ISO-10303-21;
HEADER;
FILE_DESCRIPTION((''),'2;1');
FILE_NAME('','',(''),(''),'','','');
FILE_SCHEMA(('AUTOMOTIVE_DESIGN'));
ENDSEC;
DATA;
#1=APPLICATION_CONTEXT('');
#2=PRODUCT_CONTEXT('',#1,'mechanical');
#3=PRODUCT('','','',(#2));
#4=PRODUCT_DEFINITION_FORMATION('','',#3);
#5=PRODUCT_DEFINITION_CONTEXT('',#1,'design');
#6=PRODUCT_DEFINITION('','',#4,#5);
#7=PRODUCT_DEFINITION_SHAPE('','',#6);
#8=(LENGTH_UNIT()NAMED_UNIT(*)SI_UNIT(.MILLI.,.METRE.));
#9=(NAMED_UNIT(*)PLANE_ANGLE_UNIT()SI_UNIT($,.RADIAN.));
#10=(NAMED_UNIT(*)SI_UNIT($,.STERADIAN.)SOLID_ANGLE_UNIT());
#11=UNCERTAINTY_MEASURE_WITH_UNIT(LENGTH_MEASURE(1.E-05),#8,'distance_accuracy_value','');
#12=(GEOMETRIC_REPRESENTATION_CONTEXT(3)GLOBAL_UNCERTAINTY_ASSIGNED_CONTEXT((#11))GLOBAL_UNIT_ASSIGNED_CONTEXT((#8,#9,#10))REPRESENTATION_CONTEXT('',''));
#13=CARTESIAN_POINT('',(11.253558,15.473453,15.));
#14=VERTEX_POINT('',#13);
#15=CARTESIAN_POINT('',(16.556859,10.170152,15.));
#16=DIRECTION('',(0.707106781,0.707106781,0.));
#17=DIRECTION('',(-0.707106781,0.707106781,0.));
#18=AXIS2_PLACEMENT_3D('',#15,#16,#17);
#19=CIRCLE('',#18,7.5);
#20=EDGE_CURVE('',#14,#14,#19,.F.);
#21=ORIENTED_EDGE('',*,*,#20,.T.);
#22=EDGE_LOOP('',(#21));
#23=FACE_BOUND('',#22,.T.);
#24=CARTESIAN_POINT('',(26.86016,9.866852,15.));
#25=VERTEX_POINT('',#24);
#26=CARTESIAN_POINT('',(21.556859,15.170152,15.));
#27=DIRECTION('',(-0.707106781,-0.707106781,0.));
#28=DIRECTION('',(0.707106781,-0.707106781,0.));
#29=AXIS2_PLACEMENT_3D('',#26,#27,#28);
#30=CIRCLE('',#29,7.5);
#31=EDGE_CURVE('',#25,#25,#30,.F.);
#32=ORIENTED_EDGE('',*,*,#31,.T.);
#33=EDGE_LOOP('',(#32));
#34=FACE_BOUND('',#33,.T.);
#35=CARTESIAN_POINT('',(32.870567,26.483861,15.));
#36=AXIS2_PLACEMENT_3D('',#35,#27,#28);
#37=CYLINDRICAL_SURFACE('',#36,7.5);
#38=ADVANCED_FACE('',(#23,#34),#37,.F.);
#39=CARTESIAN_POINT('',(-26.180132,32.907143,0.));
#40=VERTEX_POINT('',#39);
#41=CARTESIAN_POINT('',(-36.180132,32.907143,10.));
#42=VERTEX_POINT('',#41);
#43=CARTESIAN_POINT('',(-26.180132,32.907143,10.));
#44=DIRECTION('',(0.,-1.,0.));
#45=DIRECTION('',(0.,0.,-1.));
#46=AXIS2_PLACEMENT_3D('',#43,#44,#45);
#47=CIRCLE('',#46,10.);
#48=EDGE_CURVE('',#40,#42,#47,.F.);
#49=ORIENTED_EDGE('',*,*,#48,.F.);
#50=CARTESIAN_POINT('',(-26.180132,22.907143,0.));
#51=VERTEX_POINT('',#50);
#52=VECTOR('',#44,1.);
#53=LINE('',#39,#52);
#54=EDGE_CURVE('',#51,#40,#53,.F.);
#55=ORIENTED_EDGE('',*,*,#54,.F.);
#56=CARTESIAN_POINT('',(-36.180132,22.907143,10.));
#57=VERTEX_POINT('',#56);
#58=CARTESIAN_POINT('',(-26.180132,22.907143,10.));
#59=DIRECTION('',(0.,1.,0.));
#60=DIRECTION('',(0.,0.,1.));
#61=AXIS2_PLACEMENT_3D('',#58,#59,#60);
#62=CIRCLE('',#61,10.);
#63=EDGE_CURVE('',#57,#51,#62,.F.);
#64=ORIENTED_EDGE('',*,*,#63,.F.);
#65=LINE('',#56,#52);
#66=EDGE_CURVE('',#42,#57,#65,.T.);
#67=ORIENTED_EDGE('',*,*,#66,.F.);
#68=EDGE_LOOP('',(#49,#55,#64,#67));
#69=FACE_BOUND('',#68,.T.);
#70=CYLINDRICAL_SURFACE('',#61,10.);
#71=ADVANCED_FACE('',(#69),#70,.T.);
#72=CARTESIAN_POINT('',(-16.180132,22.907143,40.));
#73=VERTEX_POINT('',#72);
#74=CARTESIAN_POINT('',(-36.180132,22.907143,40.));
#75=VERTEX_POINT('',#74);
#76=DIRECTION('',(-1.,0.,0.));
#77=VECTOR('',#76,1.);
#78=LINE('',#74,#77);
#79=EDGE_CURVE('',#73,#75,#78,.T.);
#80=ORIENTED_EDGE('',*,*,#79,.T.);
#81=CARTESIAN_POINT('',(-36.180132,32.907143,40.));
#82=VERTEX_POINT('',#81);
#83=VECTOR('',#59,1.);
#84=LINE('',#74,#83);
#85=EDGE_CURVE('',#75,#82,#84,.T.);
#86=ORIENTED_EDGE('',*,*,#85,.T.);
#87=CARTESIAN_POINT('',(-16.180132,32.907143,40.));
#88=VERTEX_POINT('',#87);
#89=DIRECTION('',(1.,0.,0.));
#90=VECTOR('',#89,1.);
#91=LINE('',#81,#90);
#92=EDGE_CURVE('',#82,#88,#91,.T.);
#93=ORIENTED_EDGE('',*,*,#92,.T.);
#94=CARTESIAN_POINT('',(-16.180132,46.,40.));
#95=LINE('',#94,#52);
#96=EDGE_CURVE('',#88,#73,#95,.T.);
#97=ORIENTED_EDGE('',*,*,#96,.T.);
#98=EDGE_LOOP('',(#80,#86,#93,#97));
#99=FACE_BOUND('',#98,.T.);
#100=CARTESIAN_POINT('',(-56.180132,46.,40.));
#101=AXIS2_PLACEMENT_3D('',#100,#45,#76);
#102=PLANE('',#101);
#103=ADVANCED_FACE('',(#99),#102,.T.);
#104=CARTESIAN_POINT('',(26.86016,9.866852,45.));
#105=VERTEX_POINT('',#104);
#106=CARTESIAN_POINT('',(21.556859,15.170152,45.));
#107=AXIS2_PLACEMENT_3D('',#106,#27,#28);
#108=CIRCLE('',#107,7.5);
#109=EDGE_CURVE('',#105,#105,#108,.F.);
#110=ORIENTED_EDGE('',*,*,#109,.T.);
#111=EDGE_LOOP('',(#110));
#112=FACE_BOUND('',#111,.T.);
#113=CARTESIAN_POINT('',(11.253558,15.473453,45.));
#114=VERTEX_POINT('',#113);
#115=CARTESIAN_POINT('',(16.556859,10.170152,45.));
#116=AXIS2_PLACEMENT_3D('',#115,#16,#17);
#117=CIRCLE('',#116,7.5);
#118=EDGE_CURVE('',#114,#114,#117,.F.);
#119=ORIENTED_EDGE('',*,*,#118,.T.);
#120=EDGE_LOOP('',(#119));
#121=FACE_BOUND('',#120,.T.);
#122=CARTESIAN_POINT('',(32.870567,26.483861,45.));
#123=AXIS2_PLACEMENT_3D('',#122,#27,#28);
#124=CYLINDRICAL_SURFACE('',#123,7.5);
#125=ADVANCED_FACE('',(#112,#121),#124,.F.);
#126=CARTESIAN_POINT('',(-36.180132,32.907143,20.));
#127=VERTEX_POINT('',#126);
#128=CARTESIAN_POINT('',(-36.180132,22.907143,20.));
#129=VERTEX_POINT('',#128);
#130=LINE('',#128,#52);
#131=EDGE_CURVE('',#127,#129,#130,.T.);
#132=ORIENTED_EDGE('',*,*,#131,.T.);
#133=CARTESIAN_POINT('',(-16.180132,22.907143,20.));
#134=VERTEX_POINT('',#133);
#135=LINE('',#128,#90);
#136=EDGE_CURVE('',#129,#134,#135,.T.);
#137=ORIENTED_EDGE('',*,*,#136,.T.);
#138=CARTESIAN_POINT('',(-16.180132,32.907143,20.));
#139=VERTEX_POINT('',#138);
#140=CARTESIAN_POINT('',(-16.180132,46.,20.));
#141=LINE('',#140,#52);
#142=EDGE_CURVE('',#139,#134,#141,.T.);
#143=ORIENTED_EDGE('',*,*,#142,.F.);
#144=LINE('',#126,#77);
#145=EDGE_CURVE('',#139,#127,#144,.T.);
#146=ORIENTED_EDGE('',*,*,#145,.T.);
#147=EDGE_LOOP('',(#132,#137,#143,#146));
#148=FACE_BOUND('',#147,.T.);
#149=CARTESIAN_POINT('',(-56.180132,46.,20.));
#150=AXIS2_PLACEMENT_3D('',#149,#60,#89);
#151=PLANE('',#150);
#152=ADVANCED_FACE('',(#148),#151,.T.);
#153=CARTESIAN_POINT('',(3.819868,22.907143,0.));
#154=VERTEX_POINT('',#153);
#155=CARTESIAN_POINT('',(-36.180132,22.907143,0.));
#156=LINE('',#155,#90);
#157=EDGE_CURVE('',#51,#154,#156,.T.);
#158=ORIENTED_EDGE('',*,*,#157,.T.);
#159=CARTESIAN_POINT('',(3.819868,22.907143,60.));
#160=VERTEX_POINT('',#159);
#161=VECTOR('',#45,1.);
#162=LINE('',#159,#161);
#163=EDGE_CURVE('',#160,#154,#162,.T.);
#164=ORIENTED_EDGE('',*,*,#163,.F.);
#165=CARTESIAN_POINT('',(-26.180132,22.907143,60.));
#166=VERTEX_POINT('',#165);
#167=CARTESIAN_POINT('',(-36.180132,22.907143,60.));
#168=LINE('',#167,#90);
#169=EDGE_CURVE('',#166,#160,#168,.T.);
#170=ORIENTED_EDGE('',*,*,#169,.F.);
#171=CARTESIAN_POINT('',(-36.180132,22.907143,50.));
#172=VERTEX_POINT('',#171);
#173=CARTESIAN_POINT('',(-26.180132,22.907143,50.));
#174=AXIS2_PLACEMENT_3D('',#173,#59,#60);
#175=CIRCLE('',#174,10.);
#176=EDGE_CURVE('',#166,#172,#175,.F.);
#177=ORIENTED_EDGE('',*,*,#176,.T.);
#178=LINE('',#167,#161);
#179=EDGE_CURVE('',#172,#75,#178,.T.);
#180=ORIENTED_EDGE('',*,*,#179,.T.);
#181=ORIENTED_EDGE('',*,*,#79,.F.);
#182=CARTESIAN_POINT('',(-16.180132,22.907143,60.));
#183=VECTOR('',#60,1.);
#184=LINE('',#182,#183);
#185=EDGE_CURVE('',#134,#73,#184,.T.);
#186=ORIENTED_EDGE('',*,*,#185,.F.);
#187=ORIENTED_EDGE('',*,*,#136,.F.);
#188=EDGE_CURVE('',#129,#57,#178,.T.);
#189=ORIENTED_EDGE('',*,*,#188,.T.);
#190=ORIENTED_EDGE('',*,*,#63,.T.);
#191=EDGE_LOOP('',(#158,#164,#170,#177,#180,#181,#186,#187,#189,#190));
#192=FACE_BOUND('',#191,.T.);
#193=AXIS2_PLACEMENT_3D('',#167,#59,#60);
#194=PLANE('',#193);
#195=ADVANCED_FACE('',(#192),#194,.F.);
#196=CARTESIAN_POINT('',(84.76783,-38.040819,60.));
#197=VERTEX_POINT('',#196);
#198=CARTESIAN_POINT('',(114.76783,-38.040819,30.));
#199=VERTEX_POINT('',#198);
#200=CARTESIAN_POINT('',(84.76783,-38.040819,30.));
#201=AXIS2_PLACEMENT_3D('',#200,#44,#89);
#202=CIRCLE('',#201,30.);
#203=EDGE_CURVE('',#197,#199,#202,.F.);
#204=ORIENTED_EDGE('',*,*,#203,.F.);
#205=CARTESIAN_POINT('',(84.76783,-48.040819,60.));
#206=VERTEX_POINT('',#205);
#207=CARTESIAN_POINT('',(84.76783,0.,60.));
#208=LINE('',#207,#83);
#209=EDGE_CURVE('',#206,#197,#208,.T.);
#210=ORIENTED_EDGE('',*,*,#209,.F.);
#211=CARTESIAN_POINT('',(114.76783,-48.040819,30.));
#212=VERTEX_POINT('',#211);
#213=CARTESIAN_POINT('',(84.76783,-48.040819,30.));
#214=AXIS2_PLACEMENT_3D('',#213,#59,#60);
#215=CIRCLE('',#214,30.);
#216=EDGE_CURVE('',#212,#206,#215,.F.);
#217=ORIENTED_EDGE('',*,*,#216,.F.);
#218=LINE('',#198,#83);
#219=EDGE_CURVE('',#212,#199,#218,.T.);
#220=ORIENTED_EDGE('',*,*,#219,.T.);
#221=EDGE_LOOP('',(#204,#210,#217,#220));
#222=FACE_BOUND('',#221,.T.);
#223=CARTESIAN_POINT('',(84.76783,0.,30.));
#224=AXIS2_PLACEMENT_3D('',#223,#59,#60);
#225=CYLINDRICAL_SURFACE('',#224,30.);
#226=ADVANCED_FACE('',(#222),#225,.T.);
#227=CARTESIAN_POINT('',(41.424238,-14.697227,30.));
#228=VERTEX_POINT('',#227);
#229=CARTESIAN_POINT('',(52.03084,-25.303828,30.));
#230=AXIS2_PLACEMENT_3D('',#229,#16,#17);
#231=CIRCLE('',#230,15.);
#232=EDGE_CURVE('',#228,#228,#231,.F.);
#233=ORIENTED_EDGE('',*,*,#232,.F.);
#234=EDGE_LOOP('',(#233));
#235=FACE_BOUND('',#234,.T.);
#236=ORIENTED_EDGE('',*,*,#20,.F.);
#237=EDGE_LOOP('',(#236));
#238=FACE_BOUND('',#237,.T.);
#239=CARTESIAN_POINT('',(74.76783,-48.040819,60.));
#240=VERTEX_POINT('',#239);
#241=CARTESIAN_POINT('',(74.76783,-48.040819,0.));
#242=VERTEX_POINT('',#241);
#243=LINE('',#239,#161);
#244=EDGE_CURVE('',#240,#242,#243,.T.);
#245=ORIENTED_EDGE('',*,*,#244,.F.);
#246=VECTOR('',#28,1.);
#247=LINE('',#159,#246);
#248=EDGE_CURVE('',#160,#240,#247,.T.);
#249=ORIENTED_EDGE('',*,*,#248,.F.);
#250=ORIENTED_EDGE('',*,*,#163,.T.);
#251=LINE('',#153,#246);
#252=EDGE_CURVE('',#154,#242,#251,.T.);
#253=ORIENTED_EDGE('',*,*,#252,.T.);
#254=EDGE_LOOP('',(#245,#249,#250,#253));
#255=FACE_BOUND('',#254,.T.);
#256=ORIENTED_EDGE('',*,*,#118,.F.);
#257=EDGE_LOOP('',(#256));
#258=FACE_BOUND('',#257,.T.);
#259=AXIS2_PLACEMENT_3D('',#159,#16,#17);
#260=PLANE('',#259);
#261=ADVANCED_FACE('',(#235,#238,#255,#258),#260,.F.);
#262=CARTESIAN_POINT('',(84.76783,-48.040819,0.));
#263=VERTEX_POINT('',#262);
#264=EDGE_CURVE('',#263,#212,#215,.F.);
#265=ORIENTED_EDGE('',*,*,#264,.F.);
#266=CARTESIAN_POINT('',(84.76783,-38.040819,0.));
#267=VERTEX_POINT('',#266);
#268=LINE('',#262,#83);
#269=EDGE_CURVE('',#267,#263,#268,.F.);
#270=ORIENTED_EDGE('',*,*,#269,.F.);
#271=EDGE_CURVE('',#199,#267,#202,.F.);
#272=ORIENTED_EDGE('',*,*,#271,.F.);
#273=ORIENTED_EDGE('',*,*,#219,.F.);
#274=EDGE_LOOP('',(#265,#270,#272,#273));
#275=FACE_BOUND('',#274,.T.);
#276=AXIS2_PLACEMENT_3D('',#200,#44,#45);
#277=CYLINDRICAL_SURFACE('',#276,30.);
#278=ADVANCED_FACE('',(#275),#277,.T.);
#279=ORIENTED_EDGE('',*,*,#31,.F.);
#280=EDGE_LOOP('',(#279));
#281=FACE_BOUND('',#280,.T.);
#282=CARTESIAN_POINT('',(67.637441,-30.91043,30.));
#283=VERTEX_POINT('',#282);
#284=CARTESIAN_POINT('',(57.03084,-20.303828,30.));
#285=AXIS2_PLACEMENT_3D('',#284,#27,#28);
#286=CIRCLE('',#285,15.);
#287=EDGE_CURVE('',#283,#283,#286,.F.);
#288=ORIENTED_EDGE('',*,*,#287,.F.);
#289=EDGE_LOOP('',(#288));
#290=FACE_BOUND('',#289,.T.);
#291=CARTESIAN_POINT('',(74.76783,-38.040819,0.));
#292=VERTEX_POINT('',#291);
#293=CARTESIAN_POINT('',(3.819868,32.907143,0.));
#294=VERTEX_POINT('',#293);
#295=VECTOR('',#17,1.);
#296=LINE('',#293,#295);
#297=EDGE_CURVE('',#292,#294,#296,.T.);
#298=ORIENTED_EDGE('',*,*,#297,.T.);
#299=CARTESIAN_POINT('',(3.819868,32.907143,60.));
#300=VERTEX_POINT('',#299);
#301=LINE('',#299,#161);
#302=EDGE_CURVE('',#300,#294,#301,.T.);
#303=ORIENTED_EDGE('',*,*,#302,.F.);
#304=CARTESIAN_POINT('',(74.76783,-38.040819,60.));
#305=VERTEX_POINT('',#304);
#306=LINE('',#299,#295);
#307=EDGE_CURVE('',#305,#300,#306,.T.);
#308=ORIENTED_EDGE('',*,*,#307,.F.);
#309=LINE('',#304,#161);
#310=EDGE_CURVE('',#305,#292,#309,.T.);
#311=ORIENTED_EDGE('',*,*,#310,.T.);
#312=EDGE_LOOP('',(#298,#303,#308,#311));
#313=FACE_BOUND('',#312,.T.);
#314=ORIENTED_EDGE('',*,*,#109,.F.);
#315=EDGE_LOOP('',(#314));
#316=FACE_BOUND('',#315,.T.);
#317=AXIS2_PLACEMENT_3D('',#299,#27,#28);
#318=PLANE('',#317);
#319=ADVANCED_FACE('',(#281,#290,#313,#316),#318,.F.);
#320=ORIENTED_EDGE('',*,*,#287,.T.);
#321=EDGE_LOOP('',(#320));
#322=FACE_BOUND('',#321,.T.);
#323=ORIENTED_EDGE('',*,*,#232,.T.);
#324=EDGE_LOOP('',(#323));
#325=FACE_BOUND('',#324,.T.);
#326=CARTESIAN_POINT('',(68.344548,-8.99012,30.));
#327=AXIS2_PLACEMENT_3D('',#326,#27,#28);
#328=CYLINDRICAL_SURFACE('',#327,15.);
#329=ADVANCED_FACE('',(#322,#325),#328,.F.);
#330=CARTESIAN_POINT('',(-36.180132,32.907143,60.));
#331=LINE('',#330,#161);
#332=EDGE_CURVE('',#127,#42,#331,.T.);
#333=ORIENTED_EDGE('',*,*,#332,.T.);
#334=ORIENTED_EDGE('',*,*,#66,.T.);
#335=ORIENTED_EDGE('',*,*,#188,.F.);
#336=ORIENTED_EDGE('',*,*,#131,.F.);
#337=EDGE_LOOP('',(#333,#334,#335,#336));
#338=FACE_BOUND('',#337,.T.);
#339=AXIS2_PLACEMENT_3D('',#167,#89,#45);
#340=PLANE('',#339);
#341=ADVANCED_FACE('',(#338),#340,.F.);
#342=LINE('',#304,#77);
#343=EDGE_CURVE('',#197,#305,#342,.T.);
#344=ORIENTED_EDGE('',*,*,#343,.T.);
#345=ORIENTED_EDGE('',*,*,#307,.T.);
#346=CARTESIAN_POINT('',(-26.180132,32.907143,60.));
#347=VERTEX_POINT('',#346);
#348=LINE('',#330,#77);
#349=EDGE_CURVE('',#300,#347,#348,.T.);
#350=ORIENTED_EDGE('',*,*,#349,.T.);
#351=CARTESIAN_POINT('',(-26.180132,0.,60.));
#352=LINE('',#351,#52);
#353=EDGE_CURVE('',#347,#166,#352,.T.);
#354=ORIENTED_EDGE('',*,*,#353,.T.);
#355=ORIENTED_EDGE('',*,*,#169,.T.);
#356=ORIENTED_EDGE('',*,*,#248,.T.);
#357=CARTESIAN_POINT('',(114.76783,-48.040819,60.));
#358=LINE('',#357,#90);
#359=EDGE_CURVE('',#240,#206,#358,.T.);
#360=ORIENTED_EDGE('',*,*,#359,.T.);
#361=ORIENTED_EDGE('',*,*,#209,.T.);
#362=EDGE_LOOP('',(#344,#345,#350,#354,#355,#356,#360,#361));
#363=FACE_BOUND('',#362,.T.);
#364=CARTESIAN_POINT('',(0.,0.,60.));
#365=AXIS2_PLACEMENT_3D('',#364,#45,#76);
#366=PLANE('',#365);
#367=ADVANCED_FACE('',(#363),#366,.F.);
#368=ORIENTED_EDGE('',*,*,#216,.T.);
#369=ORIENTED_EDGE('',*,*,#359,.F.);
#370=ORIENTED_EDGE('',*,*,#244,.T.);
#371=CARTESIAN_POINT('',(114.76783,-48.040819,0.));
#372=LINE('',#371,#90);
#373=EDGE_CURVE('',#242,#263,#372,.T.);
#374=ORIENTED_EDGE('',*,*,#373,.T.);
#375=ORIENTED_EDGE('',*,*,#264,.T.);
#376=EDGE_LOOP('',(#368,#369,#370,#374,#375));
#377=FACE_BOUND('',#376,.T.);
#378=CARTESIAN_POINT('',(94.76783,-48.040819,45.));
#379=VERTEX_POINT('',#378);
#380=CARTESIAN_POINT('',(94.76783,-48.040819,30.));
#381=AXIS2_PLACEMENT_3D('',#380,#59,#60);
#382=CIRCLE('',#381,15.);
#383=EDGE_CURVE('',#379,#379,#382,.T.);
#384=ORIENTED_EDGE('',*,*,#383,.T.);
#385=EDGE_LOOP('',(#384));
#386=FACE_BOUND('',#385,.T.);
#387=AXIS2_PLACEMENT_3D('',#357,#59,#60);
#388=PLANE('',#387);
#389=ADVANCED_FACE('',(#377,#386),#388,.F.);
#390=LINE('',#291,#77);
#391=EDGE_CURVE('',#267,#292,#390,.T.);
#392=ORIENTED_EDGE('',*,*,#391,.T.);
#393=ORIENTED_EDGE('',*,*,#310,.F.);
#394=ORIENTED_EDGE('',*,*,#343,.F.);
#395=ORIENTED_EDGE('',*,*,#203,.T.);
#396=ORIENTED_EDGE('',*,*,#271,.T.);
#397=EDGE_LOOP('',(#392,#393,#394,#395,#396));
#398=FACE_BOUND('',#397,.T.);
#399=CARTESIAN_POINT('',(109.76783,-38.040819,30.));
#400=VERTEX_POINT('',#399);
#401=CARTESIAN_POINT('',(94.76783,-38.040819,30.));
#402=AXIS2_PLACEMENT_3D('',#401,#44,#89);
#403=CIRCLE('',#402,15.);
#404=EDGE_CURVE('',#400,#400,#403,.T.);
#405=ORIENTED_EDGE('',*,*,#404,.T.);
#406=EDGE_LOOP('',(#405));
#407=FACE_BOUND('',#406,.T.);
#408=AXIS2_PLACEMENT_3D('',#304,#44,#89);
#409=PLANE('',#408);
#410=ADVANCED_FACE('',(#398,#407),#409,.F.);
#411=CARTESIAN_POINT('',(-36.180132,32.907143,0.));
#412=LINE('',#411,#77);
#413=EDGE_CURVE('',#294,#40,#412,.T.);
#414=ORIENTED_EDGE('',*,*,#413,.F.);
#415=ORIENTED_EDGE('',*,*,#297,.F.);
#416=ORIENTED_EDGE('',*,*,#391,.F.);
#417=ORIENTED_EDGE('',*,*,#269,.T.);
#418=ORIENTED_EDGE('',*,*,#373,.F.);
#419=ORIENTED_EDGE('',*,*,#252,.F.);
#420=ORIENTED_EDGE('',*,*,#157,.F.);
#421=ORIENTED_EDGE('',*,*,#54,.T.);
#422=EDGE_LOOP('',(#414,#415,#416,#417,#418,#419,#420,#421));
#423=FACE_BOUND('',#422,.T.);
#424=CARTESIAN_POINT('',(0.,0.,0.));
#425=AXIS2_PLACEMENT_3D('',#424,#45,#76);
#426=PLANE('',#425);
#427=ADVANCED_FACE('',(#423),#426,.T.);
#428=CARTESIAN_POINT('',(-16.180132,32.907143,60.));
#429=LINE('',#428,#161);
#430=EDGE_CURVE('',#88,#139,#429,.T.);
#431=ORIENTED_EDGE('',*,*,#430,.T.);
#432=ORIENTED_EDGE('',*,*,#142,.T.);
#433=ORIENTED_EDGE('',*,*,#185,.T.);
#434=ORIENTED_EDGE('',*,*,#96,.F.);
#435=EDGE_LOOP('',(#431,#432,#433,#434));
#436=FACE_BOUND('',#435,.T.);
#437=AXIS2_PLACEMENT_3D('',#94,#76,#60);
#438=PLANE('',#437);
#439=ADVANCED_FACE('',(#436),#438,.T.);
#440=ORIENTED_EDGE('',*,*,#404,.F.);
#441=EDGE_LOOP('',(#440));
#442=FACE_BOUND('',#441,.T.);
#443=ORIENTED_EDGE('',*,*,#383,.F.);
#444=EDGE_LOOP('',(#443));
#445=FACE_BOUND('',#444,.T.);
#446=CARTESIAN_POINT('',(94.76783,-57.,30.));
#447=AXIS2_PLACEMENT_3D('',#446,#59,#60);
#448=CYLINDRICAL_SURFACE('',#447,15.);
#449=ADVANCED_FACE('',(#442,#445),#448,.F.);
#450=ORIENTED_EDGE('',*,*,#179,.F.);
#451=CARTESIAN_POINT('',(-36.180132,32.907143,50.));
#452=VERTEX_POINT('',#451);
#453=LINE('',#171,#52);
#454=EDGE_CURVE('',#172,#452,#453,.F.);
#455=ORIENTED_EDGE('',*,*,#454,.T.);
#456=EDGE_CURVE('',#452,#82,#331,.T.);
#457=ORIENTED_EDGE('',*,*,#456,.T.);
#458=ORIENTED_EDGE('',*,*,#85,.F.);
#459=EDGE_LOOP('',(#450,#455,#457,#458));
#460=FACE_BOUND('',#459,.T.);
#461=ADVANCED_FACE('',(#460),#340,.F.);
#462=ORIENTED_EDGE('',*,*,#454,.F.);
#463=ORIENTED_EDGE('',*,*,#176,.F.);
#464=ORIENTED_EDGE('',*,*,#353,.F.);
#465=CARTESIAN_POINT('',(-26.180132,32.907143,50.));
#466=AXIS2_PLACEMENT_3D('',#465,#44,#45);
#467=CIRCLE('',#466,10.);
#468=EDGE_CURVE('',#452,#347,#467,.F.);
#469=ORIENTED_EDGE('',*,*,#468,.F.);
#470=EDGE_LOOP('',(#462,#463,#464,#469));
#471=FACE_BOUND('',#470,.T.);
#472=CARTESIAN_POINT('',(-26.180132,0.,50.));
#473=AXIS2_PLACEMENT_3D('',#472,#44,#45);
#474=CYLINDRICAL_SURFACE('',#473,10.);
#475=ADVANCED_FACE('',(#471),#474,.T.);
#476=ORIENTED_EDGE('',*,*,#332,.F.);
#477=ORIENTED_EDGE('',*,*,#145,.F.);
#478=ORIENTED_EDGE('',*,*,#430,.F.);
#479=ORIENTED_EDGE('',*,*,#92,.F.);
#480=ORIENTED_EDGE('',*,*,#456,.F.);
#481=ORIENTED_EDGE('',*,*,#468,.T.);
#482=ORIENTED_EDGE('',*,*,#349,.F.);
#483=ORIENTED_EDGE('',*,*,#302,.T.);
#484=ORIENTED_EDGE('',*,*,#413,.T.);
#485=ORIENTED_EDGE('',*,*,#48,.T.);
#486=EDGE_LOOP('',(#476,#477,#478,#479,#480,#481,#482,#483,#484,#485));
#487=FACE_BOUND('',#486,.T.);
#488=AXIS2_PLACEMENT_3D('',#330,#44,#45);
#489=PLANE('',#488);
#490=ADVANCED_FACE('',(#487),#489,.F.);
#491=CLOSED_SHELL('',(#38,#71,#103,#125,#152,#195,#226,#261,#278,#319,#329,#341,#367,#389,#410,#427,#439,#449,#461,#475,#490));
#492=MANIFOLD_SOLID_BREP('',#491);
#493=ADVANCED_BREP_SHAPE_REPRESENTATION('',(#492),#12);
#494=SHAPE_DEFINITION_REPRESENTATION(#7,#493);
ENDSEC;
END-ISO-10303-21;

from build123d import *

# Parameters (mm, degrees)
SALIENTE_EXTRUIR1_DEPTH    = 60
CROQUIS3_W                 = 40
CROQUIS3_H                 = 20
CORTAR_EXTRUIR1_DEPTH      = 46
CROQUIS4_R                 = 15
CORTAR_EXTRUIR5_DEPTH      = 57
CORTAR_EXTRUIR6_DEPTH      = 16
CORTAR_EXTRUIR6_DEPTH_BACK = 19
CROQUIS12_R                = 7.5
CROQUIS12_R_2              = 15
REDONDEO2_R                = 10
REDONDEO3_R                = 30


with BuildPart() as part:
    # Croquis2 → Saliente-Extruir1 (new body)
    with BuildSketch(Plane.XY):
        Polygon((-36.180131723, 22.907142857), (3.819868277, 22.907142857), (74.767829948, -48.040818814), (114.767829948, -48.040818814), (114.767829948, -38.040818814), (74.767829948, -38.040818814), (3.819868277, 32.907142857), (-36.180131723, 32.907142857), align=None)
    extrude(amount=SALIENTE_EXTRUIR1_DEPTH)

    # Croquis3 → Cortar-Extruir1 (cut)
    with BuildSketch(Plane(origin=(0, 0, 0), x_dir=(1, 0, 0), z_dir=(0, 1, 0))):
        with Locations((-36.180131723, -30)):
            Rectangle(CROQUIS3_W, CROQUIS3_H)
    extrude(amount=CORTAR_EXTRUIR1_DEPTH, mode=Mode.SUBTRACT)

    # Croquis4 → Cortar-Extruir5 (cut)
    with BuildSketch(Plane(origin=(0, 0, 0), x_dir=(1, 0, 0), z_dir=(0, 1, 0))):
        with Locations(Location((94.767829948, -30, 0), (0, 0, 270))):
            Circle(CROQUIS4_R)
    extrude(amount=-CORTAR_EXTRUIR5_DEPTH, mode=Mode.SUBTRACT)

    # Croquis12 → Cortar-Extruir6 (cut, two sides: drawn at the far end of the back side and taken through both)
    with BuildSketch(Plane(origin=(18.363505567, 18.363505567, 0), x_dir=(0, 0, -1), z_dir=(0.7071067811865486, 0.7071067811865465, 0)).offset(-CORTAR_EXTRUIR6_DEPTH_BACK)):
        with Locations(Location((-15, -4.516083302, 0), (0, 0, 270))):
            Circle(CROQUIS12_R)
        with Locations(Location((-45, -4.516083302, 0), (0, 0, 270))):
            Circle(CROQUIS12_R)
        with Locations(Location((-30, -54.683868112, 0), (0, 0, 270))):
            Circle(CROQUIS12_R_2)
    extrude(amount=CORTAR_EXTRUIR6_DEPTH + CORTAR_EXTRUIR6_DEPTH_BACK, mode=Mode.SUBTRACT)

    # Redondeo2
    redondeo2_edges = [part.edges().sort_by_distance(p)[0] for p in [
        (-36.180131723, 27.907142857, 0),
        (-36.180131723, 27.907142857, 60),
    ]]
    fillet(redondeo2_edges, radius=REDONDEO2_R)

    # Redondeo3
    redondeo3_edges = [part.edges().sort_by_distance(p)[0] for p in [
        (114.767829948, -43.040818814, 60),
        (114.767829948, -43.040818814, 0),
    ]]
    fillet(redondeo3_edges, radius=REDONDEO3_R - 0.0001)  # a hair under: the kernel refuses the full size


solid = part.part
